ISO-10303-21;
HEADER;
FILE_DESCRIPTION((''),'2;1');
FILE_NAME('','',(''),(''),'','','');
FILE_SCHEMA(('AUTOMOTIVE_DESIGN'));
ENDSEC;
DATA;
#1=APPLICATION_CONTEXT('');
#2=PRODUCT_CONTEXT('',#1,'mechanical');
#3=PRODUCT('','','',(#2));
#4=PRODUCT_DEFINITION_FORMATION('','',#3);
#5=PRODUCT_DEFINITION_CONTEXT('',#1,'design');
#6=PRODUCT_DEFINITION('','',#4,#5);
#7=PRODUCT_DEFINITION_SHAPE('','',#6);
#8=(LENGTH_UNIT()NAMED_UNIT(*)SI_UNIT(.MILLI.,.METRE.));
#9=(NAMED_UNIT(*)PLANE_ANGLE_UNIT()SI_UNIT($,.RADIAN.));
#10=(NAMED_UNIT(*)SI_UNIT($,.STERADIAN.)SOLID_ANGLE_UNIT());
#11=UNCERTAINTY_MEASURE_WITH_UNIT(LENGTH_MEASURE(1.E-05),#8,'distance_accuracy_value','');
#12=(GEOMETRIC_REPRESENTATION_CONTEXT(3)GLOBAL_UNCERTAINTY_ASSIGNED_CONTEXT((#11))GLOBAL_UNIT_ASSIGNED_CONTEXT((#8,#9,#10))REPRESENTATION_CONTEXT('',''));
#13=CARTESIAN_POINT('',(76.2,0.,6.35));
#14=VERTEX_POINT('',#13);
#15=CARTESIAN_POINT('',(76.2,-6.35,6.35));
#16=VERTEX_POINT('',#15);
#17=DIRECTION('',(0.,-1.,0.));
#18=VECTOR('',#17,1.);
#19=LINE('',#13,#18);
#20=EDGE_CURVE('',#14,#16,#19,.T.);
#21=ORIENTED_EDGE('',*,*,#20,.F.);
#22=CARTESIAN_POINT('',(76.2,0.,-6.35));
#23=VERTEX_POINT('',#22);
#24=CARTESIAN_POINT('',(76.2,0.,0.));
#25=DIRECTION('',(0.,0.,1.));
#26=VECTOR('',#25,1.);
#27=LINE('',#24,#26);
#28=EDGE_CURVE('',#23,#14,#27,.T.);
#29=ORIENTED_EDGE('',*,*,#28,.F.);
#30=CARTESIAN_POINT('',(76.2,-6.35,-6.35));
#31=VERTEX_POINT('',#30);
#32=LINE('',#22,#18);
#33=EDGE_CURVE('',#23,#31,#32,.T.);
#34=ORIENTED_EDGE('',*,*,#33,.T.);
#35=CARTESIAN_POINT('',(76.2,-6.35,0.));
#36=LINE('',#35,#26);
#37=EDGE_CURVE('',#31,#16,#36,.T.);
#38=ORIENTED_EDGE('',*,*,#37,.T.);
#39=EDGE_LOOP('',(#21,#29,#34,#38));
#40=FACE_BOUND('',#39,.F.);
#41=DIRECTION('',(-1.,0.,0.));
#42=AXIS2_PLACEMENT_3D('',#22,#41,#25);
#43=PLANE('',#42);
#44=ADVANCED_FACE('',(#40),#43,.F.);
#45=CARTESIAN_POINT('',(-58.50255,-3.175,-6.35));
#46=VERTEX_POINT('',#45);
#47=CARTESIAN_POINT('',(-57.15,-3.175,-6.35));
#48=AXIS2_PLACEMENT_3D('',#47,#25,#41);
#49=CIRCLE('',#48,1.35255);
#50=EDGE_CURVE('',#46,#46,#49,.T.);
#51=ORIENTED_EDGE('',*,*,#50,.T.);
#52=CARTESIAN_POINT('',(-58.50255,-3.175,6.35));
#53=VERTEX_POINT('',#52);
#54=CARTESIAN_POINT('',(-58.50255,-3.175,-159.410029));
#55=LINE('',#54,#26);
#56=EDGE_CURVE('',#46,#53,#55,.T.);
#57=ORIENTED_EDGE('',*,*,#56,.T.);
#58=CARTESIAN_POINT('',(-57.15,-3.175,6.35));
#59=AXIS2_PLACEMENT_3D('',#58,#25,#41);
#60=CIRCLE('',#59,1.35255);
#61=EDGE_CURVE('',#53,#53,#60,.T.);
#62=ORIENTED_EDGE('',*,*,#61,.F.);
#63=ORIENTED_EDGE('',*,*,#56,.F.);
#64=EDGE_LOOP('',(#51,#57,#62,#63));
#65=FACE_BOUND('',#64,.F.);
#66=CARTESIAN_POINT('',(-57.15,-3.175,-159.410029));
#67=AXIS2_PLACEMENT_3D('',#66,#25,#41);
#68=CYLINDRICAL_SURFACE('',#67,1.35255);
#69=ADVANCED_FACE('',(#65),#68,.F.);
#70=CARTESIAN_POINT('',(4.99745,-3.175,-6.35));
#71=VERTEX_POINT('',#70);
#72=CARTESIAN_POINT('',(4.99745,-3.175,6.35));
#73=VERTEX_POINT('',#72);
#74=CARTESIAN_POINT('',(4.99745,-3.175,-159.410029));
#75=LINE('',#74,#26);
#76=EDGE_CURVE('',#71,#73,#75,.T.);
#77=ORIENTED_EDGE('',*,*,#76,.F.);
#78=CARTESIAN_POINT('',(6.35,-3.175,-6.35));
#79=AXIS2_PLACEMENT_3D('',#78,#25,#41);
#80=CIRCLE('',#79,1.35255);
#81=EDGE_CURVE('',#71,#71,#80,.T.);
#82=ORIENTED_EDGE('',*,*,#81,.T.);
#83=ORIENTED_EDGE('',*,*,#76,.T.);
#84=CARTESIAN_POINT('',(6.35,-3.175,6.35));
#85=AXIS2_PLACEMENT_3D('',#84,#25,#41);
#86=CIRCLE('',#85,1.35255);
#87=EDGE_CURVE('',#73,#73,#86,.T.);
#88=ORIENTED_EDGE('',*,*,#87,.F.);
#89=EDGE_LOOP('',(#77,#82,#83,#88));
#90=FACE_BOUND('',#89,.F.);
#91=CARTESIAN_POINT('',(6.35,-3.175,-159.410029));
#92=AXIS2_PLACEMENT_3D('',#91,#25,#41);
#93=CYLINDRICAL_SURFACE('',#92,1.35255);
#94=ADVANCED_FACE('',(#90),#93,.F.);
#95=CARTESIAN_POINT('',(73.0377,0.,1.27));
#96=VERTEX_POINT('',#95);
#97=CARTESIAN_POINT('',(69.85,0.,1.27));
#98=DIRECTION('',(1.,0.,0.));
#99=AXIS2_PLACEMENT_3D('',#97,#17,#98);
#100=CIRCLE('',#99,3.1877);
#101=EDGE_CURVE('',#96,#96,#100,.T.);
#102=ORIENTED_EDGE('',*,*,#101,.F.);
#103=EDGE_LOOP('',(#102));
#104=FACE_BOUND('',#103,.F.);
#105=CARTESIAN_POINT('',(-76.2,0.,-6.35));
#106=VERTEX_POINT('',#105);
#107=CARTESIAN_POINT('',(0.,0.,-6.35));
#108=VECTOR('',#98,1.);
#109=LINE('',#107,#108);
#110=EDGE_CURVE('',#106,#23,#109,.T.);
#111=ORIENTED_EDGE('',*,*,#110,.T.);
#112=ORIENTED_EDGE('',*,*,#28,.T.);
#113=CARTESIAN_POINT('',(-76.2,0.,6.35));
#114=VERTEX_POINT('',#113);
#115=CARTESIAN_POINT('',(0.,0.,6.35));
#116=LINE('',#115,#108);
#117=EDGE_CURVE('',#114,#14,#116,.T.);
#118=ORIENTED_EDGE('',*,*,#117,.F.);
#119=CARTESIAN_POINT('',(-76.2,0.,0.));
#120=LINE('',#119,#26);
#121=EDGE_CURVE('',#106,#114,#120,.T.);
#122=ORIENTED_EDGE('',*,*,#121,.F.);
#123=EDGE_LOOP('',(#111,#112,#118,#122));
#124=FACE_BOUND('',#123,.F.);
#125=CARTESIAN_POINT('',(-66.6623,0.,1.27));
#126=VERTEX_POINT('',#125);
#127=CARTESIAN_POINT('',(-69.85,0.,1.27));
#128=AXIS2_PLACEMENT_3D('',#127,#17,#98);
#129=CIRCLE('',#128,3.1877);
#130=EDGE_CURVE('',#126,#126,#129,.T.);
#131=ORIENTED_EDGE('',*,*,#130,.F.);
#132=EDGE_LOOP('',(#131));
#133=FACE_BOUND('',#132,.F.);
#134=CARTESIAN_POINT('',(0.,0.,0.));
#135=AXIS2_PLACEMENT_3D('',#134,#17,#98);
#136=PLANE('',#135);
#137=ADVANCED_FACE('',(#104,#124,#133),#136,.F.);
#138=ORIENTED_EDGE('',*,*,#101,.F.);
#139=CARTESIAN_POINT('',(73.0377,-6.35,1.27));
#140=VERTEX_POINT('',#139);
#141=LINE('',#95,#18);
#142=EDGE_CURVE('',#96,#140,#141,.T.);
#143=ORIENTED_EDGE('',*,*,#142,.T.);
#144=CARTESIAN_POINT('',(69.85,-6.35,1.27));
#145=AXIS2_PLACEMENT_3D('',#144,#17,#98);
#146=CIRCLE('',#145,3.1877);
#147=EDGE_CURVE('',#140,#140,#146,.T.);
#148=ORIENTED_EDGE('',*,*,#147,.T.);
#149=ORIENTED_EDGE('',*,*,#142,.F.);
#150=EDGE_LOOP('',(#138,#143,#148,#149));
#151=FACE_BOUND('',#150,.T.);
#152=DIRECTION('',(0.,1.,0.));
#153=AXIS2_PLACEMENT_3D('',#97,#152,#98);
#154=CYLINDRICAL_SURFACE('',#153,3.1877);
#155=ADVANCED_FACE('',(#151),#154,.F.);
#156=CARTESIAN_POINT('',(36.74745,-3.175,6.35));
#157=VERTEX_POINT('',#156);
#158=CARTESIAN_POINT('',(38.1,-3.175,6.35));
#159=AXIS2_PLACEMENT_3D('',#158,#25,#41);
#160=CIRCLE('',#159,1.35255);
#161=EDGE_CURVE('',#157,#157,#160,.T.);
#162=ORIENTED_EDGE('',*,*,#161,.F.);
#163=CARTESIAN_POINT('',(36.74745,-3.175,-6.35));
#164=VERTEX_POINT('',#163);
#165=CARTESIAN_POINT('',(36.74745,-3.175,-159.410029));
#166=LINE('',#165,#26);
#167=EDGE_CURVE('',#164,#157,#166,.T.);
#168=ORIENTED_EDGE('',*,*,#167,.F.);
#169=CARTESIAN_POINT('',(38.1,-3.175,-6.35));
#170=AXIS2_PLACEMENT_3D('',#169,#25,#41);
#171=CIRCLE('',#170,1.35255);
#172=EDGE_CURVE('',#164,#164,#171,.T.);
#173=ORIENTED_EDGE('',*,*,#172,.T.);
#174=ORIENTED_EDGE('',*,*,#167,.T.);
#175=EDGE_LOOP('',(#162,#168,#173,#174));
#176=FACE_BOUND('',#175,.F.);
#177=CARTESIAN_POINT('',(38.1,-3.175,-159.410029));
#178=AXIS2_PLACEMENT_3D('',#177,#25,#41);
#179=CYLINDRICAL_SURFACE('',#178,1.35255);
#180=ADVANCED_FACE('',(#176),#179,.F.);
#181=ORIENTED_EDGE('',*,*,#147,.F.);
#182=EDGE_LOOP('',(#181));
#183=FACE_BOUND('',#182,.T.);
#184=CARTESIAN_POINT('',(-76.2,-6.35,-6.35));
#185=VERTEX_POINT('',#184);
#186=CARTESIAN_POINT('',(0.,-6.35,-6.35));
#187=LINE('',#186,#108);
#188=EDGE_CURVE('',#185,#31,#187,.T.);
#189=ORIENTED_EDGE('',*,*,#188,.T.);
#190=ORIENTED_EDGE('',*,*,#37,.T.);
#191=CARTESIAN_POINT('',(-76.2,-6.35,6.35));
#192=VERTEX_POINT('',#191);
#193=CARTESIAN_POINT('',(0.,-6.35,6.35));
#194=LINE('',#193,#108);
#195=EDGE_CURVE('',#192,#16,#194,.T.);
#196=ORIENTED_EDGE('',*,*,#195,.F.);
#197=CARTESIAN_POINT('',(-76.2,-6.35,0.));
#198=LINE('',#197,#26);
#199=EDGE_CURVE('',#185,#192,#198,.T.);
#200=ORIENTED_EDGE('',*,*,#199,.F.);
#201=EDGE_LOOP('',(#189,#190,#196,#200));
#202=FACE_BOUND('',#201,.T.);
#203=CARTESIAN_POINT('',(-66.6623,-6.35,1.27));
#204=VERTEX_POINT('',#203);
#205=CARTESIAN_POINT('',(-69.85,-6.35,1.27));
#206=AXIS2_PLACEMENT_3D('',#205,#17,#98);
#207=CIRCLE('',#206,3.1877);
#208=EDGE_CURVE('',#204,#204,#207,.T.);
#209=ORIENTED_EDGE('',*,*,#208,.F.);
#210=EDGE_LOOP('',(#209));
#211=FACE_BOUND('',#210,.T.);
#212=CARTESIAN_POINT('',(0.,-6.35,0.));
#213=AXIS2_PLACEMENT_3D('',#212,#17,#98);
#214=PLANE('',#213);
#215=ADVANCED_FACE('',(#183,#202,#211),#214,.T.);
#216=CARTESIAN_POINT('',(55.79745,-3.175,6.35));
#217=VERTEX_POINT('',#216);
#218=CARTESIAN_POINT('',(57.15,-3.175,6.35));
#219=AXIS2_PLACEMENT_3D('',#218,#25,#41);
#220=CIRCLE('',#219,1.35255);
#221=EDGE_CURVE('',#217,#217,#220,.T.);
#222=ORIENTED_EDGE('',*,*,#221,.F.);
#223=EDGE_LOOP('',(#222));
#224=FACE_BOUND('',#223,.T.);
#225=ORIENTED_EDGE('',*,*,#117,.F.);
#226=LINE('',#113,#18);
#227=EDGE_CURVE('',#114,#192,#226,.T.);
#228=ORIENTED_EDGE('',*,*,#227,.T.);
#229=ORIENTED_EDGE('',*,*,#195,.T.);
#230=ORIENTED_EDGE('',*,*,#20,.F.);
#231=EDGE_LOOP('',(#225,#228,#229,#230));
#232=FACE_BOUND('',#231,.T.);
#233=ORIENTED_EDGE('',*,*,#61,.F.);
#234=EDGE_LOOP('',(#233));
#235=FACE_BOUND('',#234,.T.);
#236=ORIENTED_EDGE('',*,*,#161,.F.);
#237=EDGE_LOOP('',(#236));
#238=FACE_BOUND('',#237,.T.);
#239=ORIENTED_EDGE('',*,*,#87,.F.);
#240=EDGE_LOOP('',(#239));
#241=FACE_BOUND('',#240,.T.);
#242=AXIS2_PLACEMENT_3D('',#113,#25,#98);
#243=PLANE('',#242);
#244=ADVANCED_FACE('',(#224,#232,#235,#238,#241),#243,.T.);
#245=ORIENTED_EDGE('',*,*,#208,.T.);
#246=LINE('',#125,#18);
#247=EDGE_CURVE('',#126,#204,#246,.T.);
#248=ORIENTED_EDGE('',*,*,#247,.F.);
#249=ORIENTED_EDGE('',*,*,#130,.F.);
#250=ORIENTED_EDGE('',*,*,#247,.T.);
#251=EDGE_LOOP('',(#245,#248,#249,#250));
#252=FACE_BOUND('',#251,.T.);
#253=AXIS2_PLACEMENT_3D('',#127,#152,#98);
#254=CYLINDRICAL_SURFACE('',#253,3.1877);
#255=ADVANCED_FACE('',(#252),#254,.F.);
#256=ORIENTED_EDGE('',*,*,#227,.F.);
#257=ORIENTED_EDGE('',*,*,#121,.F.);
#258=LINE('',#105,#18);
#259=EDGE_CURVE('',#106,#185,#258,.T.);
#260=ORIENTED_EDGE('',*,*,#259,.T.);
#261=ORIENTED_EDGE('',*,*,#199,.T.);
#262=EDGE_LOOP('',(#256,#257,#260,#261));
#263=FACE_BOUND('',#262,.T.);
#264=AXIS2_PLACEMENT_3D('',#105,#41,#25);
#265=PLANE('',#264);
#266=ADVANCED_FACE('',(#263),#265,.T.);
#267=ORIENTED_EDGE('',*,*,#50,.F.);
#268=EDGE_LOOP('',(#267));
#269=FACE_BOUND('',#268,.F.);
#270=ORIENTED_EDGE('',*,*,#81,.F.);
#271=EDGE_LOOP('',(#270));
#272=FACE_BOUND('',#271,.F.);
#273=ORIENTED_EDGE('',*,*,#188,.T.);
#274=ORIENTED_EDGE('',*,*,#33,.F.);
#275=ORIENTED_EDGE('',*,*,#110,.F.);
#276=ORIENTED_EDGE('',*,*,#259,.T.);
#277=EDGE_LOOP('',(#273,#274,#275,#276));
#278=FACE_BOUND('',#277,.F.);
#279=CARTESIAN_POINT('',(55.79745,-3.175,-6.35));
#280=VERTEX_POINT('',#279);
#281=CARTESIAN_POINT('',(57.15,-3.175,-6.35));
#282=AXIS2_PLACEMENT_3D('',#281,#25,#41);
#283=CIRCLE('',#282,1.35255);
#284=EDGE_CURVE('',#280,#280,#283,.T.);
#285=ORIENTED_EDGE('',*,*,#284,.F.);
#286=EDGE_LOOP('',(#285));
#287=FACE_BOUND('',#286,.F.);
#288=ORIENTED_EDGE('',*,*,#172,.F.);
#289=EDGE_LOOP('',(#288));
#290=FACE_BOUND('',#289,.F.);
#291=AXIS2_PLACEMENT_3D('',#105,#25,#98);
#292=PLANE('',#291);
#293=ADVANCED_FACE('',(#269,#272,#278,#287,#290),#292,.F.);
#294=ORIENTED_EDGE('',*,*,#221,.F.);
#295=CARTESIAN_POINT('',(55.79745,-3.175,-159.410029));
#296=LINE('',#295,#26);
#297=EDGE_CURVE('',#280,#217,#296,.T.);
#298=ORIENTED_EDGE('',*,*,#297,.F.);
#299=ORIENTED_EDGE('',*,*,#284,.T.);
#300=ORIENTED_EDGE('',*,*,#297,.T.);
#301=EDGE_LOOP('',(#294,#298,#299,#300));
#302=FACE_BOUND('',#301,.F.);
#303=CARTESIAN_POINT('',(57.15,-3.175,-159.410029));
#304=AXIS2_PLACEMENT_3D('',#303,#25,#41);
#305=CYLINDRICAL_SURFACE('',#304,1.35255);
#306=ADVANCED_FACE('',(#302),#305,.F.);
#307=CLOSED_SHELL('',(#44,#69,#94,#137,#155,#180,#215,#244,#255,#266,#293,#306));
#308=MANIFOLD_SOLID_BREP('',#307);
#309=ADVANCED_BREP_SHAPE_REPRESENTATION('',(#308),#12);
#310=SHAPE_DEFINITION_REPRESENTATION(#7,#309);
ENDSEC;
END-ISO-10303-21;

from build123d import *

# Parameters (mm, degrees)
F0_W     = 152.4
F0_H     = 12.7
F0_R     = 3.1877
F1_DEPTH = 6.35
F3_D     = 2.7051
F4_D     = 2.7051
F5_D     = 2.7051


with BuildPart() as f1:
    # F0 (on Front) → F1 (new body)
    with BuildSketch(Plane.XZ):
        Rectangle(F0_W, F0_H)
        with Locations((-69.85, 1.27)):
            Circle(F0_R, mode=Mode.SUBTRACT)
        with Locations((69.85, 1.27)):
            Circle(F0_R, mode=Mode.SUBTRACT)
    extrude(amount=F1_DEPTH)

    # F3 (through all)
    with Locations(Plane(origin=(0, 0, -6.35), x_dir=(1, 0, 0), z_dir=(0, 0, -1))):
        with Locations((-57.15, 3.175), (57.15, 3.175)):
            Hole(F3_D / 2)

    # F4 (through all)
    with Locations(Plane(origin=(0, 0, -6.35), x_dir=(1, 0, 0), z_dir=(0, 0, -1))):
        with Locations((6.35, 3.175)):
            Hole(F4_D / 2)

    # F5 (through all)
    with Locations(Plane(origin=(0, 0, -6.35), x_dir=(1, 0, 0), z_dir=(0, 0, -1))):
        with Locations((38.1, 3.175)):
            Hole(F5_D / 2)


solid = f1.part
